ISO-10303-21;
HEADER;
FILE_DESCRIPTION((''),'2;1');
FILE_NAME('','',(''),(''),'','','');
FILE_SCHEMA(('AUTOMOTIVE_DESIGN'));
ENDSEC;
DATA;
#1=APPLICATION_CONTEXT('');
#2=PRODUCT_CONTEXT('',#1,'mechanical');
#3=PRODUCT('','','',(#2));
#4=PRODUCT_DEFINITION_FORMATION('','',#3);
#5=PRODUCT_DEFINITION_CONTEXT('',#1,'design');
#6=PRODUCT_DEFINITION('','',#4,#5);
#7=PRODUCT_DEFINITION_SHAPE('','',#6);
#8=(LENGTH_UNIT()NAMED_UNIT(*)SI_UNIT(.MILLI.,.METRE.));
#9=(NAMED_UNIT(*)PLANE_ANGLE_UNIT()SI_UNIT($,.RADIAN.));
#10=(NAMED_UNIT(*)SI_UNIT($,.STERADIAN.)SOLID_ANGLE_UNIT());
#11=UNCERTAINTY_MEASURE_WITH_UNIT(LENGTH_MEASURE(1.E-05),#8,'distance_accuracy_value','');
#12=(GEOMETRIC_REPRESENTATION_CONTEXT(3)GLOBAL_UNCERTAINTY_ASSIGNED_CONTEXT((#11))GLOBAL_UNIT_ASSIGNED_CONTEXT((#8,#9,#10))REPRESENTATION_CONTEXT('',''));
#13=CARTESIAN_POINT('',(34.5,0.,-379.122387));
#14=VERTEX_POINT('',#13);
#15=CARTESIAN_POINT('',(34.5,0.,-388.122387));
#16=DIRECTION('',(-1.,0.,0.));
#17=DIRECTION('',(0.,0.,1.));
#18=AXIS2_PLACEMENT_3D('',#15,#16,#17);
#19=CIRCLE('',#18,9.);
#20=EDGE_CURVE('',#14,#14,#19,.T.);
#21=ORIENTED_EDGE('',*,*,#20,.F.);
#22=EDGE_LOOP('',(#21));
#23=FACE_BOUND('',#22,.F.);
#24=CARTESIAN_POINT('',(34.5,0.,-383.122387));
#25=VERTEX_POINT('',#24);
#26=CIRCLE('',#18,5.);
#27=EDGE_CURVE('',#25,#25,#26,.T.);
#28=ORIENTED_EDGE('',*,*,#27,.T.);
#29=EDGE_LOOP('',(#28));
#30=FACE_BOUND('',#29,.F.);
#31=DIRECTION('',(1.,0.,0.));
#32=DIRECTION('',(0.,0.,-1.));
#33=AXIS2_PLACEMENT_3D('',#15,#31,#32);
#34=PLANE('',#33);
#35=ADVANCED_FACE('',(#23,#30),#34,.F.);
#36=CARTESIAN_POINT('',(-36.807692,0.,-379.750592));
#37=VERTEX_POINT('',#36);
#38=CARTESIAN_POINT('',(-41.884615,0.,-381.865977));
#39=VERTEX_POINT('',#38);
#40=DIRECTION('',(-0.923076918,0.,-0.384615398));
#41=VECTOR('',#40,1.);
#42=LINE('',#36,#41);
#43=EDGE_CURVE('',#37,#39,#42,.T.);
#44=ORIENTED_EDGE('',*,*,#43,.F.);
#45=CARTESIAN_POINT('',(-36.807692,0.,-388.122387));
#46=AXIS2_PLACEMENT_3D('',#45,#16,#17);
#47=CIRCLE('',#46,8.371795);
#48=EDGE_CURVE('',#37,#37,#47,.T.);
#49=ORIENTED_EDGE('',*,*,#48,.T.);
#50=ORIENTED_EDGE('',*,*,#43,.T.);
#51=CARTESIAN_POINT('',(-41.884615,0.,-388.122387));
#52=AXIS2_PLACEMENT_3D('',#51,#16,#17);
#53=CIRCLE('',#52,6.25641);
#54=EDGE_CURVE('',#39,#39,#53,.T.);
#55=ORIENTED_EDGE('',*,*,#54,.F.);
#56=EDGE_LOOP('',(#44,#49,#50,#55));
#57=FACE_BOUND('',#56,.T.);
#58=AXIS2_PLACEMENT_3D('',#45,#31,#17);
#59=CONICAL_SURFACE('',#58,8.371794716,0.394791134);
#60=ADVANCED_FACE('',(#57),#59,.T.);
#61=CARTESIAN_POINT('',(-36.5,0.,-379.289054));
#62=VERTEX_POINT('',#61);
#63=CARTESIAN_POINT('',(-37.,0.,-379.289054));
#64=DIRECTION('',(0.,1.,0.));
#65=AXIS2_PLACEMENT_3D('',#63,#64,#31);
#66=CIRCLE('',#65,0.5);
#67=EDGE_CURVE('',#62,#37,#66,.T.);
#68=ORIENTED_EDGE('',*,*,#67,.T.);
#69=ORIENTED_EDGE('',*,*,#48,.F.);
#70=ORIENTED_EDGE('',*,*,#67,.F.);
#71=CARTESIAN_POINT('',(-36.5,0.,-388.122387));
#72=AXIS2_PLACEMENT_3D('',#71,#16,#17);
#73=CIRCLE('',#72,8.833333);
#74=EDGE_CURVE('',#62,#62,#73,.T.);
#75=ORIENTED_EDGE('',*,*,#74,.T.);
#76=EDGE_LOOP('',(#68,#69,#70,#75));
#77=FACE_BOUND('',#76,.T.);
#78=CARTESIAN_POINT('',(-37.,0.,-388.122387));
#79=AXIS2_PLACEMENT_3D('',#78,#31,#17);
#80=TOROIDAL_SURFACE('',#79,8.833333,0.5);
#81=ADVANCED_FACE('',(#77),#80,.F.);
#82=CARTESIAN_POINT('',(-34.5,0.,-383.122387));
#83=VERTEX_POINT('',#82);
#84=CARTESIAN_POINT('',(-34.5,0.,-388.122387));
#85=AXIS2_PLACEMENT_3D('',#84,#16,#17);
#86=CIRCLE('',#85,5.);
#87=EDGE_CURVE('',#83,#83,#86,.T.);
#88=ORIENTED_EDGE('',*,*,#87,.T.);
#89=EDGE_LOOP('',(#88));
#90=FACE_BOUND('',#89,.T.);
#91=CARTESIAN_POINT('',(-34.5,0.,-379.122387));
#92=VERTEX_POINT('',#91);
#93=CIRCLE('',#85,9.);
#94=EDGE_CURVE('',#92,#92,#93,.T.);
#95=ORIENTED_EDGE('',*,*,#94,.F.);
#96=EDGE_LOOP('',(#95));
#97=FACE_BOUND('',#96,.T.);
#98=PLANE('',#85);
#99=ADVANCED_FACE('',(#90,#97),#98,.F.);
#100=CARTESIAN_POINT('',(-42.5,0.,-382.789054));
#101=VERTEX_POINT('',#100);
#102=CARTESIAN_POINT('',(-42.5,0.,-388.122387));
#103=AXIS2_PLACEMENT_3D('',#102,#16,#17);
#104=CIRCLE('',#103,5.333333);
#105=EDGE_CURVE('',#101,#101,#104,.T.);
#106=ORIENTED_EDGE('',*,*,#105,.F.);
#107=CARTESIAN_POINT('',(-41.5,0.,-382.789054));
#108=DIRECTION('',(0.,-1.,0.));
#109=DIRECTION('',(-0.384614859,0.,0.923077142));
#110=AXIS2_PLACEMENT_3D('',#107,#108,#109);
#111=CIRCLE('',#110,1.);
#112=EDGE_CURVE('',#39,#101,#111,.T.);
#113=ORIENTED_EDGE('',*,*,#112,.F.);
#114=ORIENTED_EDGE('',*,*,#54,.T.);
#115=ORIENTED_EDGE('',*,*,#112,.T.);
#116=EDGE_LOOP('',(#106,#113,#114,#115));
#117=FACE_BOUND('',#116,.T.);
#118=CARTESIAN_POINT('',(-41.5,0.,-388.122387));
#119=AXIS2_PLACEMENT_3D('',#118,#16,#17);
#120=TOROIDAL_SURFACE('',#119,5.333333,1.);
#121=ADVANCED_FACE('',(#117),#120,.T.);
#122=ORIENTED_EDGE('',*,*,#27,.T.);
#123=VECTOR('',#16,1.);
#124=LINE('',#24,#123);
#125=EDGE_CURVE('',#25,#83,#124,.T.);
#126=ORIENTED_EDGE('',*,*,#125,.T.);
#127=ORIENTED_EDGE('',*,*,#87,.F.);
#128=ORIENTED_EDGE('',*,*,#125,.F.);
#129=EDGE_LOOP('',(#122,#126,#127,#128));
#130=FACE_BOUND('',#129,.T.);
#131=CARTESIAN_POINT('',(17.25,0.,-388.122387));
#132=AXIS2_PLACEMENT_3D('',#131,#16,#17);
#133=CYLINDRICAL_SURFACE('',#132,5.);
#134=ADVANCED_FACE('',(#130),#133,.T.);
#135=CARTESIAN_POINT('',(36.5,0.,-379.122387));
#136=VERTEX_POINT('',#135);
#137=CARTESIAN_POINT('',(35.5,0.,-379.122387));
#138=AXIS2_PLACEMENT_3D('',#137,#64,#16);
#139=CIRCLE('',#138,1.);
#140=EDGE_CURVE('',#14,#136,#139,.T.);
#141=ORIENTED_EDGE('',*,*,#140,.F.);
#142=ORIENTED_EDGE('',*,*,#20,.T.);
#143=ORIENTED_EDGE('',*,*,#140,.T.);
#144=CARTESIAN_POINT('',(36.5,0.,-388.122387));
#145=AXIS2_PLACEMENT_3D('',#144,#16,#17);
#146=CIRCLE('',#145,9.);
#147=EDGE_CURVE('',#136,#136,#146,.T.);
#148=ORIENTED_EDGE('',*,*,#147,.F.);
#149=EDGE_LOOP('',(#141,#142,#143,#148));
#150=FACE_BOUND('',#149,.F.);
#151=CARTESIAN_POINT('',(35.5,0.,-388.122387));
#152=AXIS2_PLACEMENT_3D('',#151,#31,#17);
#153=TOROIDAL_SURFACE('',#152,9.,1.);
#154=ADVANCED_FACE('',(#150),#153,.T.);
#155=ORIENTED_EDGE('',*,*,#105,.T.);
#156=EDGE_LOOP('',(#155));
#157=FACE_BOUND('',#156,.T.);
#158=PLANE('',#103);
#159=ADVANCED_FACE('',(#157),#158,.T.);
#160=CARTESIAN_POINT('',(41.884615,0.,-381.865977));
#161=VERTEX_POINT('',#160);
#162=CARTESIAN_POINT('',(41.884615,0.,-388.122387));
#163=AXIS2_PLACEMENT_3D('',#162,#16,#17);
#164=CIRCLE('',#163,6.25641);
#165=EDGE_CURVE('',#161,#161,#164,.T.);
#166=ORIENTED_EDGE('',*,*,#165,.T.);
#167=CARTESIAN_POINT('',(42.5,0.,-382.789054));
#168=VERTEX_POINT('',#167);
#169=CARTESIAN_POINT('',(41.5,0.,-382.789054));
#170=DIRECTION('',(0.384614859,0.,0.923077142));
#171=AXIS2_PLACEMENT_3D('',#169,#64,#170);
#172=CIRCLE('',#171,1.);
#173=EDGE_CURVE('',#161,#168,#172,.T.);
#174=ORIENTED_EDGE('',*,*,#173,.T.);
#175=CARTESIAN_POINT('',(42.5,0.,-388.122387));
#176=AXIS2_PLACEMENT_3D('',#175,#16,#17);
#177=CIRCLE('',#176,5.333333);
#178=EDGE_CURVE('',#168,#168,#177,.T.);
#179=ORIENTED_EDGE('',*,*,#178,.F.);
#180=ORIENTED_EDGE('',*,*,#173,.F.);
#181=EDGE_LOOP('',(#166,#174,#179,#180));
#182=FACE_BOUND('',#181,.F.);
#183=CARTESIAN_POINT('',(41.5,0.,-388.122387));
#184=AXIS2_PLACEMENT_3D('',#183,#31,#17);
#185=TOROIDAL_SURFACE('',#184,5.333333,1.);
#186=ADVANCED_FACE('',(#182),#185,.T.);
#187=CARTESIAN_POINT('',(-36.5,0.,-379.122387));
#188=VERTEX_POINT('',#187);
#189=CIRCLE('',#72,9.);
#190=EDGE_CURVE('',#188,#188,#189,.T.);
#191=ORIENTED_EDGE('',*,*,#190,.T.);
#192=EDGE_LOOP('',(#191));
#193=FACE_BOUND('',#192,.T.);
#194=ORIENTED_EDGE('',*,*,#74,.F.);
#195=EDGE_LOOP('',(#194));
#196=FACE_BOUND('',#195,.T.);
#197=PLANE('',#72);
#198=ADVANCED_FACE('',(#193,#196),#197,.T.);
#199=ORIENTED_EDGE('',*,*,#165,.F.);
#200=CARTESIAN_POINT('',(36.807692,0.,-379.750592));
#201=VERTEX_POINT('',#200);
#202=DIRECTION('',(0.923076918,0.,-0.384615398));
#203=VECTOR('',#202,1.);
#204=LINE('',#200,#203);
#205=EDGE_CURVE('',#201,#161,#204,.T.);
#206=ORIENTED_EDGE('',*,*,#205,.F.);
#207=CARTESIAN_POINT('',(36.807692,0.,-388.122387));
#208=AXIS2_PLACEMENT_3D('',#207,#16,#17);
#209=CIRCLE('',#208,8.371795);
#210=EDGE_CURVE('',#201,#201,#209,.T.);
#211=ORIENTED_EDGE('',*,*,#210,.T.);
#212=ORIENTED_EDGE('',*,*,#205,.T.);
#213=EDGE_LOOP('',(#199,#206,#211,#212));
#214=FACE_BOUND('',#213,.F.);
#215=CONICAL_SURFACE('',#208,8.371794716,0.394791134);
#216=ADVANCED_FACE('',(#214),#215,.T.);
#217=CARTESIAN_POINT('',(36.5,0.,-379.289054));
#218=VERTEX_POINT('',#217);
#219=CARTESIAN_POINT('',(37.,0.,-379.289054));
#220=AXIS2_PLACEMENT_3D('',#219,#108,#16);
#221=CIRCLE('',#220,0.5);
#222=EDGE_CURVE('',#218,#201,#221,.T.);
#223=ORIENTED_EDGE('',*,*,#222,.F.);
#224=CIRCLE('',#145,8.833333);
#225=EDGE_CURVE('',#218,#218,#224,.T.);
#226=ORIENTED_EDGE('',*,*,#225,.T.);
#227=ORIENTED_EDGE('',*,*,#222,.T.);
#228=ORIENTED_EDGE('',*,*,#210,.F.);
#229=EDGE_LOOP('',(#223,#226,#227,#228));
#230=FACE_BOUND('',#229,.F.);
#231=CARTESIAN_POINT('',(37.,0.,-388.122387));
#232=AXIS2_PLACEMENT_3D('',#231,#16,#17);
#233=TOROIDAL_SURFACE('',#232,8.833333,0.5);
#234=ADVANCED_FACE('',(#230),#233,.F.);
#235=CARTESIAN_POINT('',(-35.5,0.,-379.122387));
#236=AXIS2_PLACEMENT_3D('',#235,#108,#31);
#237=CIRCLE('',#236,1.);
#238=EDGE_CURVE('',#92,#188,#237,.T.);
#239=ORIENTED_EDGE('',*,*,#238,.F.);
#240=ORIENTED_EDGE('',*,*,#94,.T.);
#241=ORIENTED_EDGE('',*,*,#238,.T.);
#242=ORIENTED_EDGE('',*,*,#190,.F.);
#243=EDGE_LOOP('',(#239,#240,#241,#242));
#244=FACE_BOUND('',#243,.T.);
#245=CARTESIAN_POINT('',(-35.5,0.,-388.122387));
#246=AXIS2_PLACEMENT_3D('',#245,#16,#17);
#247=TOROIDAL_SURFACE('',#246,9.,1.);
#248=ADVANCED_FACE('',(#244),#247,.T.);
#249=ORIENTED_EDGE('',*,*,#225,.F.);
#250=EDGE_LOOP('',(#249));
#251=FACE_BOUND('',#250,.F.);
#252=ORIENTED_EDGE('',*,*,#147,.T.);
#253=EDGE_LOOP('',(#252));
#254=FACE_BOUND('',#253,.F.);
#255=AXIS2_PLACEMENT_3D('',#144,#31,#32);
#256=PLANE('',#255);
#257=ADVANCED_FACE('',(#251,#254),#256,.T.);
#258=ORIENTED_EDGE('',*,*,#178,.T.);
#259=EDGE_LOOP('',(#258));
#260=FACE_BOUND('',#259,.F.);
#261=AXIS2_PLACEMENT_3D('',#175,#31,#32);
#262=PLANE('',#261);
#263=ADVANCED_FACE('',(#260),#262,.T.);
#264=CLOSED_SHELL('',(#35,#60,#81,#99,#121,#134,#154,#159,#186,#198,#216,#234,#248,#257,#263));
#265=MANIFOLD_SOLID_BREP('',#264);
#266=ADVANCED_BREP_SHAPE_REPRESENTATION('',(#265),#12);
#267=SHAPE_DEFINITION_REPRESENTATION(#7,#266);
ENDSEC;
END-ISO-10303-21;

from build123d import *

# Parameters (mm, degrees)
F0_W = 34.5
F0_H = 5


# Not quite as in the source:
# - ends of sketch curves that miss each other by under 0.0002 mm in the source are joined


with BuildPart() as f1:
    # F0 (on Front) → F1 (revolve)
    with BuildSketch(Plane.XZ):
        with BuildLine():
            Line((-34.5, -388.122387), (-34.5, -383.122387))
            Line((-34.5, -383.122387), (-34.5, -379.122387))
            ThreePointArc((-34.5, -379.122387), (-35.5, -378.122387), (-36.5, -379.122387))
            Line((-36.5, -379.122387), (-36.5, -379.289054))
            ThreePointArc((-36.5, -379.289054), (-36.5839747248, -379.5664039061), (-36.8076918817, -379.750592284))
            Line((-36.8076918817, -379.750592284), (-41.884615, -381.865977))
            ThreePointArc((-41.884615, -381.865977), (-42.3320501877, -382.2343536438), (-42.5, -382.789054))
            Line((-42.5, -382.789054), (-42.5, -388.122387))
            Line((-42.5, -388.122387), (-34.5, -388.122387))
        make_face()
        with Locations((-17.25, -385.622387)):
            Rectangle(F0_W, F0_H)
    revolve(axis=Axis((-21.25, 0, -388.122387), (-1, 0, 0)))

    # F2: F1 across face


with BuildPart() as f1_1:
    add(f1.part)
    add(f1.part.mirror(Plane(origin=(0, 0, -388.122387), x_dir=(0, 1, 0), z_dir=(1, 0, 0))))


solid = f1_1.part
